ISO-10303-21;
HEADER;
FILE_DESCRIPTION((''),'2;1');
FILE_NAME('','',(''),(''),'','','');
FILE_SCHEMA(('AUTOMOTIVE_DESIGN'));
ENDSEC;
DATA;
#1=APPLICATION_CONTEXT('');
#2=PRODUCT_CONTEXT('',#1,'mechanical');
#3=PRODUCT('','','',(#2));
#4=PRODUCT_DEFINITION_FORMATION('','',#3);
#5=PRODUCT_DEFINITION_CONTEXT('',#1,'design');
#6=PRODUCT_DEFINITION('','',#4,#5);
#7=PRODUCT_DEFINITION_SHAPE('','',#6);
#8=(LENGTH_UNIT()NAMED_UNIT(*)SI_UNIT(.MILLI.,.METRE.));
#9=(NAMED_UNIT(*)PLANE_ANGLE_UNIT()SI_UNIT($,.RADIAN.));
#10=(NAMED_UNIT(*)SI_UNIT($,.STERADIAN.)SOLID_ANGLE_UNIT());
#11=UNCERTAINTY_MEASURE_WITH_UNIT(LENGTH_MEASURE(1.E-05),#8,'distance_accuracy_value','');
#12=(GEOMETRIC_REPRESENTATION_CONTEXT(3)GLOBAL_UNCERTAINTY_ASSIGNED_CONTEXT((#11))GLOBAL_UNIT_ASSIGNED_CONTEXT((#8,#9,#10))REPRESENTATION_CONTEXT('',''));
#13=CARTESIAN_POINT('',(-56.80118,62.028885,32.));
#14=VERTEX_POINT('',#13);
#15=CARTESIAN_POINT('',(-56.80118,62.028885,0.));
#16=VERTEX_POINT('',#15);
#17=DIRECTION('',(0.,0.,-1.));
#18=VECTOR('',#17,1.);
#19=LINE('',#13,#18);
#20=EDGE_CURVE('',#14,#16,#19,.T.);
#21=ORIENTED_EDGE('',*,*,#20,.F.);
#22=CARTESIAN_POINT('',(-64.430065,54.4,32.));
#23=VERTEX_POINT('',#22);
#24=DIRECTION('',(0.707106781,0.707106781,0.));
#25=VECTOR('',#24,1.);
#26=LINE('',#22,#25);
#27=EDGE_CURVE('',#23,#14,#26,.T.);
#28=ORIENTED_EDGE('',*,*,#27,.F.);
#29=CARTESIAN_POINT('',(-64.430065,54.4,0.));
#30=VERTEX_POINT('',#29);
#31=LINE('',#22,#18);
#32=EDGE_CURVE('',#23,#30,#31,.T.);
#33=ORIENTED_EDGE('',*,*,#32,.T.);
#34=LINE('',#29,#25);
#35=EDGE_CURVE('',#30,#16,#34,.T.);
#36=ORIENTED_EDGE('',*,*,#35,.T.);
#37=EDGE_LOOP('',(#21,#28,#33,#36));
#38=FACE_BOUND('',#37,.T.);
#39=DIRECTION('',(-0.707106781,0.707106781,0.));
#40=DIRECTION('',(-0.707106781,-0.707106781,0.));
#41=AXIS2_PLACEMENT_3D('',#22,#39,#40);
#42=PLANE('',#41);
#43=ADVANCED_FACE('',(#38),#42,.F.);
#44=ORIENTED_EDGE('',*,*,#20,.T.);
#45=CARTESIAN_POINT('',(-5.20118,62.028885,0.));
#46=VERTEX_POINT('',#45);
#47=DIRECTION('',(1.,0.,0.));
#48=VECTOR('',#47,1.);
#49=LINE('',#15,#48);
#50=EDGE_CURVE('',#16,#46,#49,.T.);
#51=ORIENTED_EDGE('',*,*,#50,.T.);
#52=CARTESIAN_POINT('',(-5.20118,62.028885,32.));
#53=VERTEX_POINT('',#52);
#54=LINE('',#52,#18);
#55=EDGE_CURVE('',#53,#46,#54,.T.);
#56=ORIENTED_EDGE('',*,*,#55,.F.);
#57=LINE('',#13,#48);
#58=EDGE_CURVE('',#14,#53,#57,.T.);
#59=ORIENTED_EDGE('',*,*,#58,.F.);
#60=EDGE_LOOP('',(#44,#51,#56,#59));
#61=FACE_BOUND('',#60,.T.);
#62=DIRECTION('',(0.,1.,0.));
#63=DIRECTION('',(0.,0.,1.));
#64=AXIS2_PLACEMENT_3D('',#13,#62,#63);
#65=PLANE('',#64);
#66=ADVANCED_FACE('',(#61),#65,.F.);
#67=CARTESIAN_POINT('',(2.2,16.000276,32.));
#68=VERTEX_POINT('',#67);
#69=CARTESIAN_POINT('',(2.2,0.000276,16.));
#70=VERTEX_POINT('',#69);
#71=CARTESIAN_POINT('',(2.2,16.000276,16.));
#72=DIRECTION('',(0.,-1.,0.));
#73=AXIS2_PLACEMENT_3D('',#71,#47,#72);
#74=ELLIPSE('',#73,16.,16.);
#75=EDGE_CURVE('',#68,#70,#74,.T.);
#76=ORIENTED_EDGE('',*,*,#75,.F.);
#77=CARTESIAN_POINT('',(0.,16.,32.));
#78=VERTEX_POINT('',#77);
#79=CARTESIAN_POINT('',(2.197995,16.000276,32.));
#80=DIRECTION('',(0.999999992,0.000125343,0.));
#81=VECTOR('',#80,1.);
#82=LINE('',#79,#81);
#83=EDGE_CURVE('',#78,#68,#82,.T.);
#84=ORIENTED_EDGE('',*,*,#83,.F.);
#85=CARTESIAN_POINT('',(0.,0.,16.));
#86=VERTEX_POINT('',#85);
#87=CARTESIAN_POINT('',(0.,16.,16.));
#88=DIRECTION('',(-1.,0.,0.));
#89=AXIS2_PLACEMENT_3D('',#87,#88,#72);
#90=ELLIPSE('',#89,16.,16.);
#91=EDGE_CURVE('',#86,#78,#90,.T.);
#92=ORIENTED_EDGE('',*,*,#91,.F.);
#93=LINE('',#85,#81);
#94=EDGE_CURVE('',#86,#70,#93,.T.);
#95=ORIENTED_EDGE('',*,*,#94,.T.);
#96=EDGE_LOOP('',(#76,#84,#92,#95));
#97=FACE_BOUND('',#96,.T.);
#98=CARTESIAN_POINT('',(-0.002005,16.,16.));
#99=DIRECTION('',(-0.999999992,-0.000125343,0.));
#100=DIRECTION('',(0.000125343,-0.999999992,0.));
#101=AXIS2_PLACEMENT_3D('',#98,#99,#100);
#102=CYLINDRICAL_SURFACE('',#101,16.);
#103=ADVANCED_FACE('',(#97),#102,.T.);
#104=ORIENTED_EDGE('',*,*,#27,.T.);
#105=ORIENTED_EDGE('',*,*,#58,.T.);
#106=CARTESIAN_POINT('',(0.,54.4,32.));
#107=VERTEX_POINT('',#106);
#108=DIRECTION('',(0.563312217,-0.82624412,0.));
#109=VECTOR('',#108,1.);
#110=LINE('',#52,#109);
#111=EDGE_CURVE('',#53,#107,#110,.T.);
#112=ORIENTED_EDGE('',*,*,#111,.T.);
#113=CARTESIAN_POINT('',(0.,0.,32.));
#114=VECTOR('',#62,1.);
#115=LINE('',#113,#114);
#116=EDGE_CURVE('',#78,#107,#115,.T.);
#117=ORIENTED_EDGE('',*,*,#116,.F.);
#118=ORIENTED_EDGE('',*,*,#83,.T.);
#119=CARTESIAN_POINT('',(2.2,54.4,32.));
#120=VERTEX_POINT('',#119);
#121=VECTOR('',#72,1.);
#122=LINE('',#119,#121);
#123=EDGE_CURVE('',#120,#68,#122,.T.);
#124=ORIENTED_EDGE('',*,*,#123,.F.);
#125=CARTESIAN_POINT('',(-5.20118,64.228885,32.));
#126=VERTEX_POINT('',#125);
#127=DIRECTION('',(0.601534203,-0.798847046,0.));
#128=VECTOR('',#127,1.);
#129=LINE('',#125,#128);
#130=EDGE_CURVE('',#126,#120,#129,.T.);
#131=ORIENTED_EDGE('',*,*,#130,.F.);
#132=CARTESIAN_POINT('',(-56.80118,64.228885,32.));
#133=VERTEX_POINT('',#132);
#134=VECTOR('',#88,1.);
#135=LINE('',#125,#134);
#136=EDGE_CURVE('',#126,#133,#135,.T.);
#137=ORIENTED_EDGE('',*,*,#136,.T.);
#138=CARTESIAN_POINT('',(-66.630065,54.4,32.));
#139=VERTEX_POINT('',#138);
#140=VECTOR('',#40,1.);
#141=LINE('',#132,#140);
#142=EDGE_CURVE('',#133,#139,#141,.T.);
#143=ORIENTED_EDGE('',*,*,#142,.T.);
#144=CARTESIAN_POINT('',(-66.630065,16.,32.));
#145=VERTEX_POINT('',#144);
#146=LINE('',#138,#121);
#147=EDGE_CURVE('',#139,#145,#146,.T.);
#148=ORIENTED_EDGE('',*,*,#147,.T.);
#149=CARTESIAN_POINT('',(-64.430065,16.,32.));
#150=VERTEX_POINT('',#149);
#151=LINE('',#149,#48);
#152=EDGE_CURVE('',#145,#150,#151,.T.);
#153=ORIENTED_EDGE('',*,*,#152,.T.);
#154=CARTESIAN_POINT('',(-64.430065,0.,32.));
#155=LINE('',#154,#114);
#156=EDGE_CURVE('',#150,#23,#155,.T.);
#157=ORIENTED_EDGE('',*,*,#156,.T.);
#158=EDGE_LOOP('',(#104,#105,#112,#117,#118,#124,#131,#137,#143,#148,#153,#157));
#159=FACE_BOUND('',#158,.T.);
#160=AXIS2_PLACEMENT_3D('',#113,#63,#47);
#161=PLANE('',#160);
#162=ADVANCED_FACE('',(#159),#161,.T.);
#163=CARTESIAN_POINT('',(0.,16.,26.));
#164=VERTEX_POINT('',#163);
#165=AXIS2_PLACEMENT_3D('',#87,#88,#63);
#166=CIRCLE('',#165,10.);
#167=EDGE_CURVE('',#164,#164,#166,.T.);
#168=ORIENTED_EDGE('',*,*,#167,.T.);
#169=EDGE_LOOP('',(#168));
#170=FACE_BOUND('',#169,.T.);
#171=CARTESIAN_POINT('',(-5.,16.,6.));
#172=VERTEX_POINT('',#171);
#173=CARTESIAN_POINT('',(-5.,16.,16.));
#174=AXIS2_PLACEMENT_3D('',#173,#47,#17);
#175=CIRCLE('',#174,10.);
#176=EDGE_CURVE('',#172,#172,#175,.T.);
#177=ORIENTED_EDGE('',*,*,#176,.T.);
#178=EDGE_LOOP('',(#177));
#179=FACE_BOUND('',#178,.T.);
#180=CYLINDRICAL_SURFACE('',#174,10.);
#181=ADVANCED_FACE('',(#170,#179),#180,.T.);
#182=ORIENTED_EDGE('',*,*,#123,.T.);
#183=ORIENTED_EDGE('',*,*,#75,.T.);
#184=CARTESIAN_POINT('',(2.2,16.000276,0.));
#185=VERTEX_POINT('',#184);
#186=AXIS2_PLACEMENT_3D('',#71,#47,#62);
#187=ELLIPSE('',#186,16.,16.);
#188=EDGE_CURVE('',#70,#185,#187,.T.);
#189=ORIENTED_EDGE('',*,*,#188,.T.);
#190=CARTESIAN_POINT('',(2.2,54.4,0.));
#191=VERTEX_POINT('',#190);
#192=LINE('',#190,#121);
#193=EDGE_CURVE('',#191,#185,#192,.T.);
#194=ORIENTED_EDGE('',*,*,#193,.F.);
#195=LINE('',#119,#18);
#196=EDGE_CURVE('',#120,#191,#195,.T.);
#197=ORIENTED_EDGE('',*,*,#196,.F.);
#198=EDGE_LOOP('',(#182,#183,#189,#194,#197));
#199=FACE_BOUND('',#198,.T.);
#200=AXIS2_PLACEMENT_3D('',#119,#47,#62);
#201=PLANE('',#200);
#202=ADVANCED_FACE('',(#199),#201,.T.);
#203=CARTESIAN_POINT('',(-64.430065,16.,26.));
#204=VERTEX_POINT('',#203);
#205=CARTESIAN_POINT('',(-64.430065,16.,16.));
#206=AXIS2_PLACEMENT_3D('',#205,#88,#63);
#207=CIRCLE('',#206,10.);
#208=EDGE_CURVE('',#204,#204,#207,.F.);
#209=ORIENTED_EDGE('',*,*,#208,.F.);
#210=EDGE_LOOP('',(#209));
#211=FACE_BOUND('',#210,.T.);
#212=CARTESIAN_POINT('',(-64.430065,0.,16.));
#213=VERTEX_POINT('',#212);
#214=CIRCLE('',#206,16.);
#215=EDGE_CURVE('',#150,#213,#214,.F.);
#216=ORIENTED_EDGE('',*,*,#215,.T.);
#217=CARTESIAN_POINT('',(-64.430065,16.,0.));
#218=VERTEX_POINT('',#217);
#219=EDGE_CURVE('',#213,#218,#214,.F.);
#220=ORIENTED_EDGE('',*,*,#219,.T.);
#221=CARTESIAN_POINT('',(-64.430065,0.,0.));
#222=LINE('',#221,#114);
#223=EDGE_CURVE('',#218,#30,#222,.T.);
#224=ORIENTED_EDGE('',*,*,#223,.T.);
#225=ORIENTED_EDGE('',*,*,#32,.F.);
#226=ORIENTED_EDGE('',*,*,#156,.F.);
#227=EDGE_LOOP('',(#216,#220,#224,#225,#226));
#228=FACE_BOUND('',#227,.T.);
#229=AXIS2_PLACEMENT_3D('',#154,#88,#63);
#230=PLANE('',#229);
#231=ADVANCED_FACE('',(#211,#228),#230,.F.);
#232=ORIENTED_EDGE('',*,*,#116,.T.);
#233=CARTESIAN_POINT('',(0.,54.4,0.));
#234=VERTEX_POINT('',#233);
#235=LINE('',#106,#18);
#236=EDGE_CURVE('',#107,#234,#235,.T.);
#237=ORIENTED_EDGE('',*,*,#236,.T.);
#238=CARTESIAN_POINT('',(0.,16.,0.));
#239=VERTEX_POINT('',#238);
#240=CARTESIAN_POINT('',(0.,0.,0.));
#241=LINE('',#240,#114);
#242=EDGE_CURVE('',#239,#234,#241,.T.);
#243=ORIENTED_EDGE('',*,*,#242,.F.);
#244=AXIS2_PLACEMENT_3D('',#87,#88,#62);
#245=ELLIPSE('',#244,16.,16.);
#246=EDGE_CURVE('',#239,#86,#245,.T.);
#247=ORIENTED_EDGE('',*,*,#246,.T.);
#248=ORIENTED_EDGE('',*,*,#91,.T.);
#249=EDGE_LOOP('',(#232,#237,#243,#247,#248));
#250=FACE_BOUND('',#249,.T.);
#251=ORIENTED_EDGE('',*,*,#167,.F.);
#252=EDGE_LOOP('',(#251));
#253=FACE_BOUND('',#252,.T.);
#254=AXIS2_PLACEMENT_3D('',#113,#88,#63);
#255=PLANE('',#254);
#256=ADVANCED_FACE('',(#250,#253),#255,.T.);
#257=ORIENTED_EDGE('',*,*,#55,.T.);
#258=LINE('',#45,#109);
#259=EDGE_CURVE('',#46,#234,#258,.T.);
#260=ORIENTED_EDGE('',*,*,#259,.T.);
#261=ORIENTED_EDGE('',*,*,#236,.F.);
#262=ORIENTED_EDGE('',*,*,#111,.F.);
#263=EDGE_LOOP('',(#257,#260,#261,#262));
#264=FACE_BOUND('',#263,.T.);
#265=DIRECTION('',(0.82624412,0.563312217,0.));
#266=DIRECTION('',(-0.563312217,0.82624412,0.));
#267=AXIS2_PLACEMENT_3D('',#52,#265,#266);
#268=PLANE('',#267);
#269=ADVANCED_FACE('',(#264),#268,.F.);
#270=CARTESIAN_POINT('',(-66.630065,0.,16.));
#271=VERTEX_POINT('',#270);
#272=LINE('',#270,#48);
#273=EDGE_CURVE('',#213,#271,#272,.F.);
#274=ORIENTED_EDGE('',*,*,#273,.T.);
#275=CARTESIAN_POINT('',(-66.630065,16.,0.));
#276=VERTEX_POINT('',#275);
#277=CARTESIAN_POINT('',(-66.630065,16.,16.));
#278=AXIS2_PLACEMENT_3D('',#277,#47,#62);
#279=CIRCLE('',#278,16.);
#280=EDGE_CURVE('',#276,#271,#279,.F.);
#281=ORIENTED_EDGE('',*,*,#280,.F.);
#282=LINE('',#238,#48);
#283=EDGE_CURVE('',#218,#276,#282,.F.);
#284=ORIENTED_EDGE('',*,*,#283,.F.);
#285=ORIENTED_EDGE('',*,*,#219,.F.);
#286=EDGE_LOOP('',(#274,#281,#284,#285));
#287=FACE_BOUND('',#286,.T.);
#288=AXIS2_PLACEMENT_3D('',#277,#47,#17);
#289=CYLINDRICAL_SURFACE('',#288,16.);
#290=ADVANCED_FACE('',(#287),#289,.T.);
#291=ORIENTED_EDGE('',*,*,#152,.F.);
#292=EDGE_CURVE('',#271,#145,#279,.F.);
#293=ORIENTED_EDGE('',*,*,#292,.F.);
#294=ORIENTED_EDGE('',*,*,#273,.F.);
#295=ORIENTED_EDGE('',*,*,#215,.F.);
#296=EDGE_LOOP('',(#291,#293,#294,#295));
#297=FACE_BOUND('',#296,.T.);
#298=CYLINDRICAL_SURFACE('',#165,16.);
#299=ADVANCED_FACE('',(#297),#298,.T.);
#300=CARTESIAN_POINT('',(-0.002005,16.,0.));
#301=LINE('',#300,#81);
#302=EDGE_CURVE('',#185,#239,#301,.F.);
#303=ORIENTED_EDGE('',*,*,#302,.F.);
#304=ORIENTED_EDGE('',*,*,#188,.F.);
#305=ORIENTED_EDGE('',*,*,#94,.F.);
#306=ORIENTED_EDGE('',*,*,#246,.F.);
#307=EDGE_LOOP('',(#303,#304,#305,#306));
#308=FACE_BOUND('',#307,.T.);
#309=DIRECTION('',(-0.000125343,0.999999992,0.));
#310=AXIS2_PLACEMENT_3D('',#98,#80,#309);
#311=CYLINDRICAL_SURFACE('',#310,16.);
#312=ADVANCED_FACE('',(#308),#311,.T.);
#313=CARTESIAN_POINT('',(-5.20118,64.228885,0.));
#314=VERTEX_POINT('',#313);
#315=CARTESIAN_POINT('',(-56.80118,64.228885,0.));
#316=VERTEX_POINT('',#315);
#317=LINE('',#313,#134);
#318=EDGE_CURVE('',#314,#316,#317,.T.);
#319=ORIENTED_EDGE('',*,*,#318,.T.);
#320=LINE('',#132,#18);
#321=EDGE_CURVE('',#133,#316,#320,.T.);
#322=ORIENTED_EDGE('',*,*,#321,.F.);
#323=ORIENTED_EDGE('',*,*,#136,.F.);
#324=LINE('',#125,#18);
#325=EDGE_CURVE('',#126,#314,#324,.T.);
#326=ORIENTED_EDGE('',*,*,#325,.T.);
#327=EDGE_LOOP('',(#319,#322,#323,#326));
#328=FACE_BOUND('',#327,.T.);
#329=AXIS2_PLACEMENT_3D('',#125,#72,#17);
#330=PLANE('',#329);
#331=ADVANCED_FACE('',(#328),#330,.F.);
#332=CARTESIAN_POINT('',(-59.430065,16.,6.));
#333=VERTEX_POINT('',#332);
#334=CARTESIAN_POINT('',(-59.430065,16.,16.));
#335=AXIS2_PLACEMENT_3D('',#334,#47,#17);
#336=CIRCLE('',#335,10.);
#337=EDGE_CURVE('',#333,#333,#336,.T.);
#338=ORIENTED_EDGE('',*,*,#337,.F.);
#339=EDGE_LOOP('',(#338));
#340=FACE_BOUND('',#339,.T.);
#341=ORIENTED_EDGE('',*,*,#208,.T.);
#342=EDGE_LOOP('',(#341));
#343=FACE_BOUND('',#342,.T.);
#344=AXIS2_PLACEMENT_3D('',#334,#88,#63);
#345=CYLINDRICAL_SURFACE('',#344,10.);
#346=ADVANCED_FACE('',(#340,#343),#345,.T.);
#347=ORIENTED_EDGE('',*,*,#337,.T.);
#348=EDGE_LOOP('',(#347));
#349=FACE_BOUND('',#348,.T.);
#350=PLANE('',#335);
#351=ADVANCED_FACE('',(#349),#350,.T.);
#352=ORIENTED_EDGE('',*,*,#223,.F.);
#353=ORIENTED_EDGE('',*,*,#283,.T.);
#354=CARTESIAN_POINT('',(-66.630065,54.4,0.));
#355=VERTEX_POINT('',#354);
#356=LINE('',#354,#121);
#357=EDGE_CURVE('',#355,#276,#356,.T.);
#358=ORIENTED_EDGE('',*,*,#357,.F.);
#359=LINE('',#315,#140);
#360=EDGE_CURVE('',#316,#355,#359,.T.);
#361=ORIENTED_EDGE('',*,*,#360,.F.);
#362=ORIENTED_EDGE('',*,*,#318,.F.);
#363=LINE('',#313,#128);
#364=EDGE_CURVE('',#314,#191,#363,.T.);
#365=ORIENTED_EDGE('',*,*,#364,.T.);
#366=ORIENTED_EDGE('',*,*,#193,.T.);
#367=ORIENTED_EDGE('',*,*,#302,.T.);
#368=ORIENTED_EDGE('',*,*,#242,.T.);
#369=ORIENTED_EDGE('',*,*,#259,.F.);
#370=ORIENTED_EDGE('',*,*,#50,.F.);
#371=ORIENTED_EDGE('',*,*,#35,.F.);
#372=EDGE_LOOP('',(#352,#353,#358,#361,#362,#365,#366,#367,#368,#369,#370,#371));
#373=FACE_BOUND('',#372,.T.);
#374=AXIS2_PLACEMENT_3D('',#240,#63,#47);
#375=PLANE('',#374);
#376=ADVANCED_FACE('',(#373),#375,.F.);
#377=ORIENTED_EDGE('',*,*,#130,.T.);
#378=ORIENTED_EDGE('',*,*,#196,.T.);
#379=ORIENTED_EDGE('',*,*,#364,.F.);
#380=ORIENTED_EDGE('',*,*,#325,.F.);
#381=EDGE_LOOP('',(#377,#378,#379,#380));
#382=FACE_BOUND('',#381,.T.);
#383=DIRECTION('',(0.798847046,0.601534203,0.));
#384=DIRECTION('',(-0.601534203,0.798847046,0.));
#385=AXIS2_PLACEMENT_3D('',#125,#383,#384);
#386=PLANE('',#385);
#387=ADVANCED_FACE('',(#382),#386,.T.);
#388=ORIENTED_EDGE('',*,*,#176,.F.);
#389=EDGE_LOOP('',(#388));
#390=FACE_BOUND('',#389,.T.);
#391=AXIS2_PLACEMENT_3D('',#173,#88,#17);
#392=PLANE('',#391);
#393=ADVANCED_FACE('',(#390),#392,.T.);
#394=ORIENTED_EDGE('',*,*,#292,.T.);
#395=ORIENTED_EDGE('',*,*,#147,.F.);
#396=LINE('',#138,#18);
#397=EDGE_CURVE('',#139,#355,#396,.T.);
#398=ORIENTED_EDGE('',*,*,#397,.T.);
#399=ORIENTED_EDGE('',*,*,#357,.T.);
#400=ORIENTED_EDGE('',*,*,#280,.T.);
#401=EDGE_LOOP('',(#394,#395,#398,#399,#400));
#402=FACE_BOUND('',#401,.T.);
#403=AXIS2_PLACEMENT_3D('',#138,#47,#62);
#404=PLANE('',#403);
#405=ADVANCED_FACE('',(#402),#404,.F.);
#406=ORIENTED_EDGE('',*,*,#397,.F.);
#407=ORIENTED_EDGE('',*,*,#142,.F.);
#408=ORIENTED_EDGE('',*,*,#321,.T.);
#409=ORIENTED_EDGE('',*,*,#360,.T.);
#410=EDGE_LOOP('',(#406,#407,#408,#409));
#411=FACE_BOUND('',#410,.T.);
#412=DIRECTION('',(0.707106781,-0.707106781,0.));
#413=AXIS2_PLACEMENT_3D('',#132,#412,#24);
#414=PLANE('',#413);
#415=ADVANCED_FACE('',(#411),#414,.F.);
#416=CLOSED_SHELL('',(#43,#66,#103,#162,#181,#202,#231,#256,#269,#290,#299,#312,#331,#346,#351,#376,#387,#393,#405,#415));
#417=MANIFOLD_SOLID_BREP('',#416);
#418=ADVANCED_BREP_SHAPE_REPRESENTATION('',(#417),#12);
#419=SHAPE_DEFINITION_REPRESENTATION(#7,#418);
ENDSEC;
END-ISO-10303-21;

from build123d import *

# Parameters (mm, degrees)
BOSS_EXTRUDE1_DEPTH = 32
FILLET1_R           = 16
FILLET2_R           = 16
SKETCH2_R           = 10
BOSS_EXTRUDE2_DEPTH = 5


with BuildPart() as part:
    # Sketch1 → Boss-Extrude1 (new body)
    with BuildSketch(Plane.XY):
        Polygon((0, 0), (0, 54.4), (-5.201179862, 62.028885271), (-56.801179862, 62.028885271), (-64.430065133, 54.4), (-64.430065133, 0), (-66.630065133, 0), (-66.630065133, 54.4), (-56.801179862, 64.228885271), (-5.201179862, 64.228885271), (2.2, 54.4), (2.2, 0.000275755), align=None)
    extrude(amount=BOSS_EXTRUDE1_DEPTH)

    # Fillet1
    fillet1_edges = [part.edges().sort_by_distance(p)[0] for p in [
        (-65.530065133, 0, 0),
        (-65.530065133, 0, 32),
    ]]
    fillet(fillet1_edges, radius=FILLET1_R - 0.0001)  # a hair under: the kernel refuses the full size

    # Fillet2
    fillet2_edges = [part.edges().sort_by_distance(p)[0] for p in [
        (1.1, 0.000137878, 32),
        (1.1, 0.000137878, 0),
    ]]
    fillet(fillet2_edges, radius=FILLET2_R - 0.0001)  # a hair under: the kernel refuses the full size

    # Sketch2 → Boss-Extrude2 (add)
    with BuildSketch(Plane(origin=(-64.430065133, 0, 0), x_dir=(0, 0, -1), z_dir=(1, 0, 0))):
        with Locations(Location((-16, 16, 0), (0, 0, 180))):
            Circle(SKETCH2_R)
    boss_extrude2 = extrude(amount=BOSS_EXTRUDE2_DEPTH)

    # Mirror1: Boss-Extrude2 across plane
    add(boss_extrude2.mirror(Plane(origin=(-32.215032567, 0, 0), x_dir=(0, 0, 1), z_dir=(1, 0, 0))))


solid = part.part
